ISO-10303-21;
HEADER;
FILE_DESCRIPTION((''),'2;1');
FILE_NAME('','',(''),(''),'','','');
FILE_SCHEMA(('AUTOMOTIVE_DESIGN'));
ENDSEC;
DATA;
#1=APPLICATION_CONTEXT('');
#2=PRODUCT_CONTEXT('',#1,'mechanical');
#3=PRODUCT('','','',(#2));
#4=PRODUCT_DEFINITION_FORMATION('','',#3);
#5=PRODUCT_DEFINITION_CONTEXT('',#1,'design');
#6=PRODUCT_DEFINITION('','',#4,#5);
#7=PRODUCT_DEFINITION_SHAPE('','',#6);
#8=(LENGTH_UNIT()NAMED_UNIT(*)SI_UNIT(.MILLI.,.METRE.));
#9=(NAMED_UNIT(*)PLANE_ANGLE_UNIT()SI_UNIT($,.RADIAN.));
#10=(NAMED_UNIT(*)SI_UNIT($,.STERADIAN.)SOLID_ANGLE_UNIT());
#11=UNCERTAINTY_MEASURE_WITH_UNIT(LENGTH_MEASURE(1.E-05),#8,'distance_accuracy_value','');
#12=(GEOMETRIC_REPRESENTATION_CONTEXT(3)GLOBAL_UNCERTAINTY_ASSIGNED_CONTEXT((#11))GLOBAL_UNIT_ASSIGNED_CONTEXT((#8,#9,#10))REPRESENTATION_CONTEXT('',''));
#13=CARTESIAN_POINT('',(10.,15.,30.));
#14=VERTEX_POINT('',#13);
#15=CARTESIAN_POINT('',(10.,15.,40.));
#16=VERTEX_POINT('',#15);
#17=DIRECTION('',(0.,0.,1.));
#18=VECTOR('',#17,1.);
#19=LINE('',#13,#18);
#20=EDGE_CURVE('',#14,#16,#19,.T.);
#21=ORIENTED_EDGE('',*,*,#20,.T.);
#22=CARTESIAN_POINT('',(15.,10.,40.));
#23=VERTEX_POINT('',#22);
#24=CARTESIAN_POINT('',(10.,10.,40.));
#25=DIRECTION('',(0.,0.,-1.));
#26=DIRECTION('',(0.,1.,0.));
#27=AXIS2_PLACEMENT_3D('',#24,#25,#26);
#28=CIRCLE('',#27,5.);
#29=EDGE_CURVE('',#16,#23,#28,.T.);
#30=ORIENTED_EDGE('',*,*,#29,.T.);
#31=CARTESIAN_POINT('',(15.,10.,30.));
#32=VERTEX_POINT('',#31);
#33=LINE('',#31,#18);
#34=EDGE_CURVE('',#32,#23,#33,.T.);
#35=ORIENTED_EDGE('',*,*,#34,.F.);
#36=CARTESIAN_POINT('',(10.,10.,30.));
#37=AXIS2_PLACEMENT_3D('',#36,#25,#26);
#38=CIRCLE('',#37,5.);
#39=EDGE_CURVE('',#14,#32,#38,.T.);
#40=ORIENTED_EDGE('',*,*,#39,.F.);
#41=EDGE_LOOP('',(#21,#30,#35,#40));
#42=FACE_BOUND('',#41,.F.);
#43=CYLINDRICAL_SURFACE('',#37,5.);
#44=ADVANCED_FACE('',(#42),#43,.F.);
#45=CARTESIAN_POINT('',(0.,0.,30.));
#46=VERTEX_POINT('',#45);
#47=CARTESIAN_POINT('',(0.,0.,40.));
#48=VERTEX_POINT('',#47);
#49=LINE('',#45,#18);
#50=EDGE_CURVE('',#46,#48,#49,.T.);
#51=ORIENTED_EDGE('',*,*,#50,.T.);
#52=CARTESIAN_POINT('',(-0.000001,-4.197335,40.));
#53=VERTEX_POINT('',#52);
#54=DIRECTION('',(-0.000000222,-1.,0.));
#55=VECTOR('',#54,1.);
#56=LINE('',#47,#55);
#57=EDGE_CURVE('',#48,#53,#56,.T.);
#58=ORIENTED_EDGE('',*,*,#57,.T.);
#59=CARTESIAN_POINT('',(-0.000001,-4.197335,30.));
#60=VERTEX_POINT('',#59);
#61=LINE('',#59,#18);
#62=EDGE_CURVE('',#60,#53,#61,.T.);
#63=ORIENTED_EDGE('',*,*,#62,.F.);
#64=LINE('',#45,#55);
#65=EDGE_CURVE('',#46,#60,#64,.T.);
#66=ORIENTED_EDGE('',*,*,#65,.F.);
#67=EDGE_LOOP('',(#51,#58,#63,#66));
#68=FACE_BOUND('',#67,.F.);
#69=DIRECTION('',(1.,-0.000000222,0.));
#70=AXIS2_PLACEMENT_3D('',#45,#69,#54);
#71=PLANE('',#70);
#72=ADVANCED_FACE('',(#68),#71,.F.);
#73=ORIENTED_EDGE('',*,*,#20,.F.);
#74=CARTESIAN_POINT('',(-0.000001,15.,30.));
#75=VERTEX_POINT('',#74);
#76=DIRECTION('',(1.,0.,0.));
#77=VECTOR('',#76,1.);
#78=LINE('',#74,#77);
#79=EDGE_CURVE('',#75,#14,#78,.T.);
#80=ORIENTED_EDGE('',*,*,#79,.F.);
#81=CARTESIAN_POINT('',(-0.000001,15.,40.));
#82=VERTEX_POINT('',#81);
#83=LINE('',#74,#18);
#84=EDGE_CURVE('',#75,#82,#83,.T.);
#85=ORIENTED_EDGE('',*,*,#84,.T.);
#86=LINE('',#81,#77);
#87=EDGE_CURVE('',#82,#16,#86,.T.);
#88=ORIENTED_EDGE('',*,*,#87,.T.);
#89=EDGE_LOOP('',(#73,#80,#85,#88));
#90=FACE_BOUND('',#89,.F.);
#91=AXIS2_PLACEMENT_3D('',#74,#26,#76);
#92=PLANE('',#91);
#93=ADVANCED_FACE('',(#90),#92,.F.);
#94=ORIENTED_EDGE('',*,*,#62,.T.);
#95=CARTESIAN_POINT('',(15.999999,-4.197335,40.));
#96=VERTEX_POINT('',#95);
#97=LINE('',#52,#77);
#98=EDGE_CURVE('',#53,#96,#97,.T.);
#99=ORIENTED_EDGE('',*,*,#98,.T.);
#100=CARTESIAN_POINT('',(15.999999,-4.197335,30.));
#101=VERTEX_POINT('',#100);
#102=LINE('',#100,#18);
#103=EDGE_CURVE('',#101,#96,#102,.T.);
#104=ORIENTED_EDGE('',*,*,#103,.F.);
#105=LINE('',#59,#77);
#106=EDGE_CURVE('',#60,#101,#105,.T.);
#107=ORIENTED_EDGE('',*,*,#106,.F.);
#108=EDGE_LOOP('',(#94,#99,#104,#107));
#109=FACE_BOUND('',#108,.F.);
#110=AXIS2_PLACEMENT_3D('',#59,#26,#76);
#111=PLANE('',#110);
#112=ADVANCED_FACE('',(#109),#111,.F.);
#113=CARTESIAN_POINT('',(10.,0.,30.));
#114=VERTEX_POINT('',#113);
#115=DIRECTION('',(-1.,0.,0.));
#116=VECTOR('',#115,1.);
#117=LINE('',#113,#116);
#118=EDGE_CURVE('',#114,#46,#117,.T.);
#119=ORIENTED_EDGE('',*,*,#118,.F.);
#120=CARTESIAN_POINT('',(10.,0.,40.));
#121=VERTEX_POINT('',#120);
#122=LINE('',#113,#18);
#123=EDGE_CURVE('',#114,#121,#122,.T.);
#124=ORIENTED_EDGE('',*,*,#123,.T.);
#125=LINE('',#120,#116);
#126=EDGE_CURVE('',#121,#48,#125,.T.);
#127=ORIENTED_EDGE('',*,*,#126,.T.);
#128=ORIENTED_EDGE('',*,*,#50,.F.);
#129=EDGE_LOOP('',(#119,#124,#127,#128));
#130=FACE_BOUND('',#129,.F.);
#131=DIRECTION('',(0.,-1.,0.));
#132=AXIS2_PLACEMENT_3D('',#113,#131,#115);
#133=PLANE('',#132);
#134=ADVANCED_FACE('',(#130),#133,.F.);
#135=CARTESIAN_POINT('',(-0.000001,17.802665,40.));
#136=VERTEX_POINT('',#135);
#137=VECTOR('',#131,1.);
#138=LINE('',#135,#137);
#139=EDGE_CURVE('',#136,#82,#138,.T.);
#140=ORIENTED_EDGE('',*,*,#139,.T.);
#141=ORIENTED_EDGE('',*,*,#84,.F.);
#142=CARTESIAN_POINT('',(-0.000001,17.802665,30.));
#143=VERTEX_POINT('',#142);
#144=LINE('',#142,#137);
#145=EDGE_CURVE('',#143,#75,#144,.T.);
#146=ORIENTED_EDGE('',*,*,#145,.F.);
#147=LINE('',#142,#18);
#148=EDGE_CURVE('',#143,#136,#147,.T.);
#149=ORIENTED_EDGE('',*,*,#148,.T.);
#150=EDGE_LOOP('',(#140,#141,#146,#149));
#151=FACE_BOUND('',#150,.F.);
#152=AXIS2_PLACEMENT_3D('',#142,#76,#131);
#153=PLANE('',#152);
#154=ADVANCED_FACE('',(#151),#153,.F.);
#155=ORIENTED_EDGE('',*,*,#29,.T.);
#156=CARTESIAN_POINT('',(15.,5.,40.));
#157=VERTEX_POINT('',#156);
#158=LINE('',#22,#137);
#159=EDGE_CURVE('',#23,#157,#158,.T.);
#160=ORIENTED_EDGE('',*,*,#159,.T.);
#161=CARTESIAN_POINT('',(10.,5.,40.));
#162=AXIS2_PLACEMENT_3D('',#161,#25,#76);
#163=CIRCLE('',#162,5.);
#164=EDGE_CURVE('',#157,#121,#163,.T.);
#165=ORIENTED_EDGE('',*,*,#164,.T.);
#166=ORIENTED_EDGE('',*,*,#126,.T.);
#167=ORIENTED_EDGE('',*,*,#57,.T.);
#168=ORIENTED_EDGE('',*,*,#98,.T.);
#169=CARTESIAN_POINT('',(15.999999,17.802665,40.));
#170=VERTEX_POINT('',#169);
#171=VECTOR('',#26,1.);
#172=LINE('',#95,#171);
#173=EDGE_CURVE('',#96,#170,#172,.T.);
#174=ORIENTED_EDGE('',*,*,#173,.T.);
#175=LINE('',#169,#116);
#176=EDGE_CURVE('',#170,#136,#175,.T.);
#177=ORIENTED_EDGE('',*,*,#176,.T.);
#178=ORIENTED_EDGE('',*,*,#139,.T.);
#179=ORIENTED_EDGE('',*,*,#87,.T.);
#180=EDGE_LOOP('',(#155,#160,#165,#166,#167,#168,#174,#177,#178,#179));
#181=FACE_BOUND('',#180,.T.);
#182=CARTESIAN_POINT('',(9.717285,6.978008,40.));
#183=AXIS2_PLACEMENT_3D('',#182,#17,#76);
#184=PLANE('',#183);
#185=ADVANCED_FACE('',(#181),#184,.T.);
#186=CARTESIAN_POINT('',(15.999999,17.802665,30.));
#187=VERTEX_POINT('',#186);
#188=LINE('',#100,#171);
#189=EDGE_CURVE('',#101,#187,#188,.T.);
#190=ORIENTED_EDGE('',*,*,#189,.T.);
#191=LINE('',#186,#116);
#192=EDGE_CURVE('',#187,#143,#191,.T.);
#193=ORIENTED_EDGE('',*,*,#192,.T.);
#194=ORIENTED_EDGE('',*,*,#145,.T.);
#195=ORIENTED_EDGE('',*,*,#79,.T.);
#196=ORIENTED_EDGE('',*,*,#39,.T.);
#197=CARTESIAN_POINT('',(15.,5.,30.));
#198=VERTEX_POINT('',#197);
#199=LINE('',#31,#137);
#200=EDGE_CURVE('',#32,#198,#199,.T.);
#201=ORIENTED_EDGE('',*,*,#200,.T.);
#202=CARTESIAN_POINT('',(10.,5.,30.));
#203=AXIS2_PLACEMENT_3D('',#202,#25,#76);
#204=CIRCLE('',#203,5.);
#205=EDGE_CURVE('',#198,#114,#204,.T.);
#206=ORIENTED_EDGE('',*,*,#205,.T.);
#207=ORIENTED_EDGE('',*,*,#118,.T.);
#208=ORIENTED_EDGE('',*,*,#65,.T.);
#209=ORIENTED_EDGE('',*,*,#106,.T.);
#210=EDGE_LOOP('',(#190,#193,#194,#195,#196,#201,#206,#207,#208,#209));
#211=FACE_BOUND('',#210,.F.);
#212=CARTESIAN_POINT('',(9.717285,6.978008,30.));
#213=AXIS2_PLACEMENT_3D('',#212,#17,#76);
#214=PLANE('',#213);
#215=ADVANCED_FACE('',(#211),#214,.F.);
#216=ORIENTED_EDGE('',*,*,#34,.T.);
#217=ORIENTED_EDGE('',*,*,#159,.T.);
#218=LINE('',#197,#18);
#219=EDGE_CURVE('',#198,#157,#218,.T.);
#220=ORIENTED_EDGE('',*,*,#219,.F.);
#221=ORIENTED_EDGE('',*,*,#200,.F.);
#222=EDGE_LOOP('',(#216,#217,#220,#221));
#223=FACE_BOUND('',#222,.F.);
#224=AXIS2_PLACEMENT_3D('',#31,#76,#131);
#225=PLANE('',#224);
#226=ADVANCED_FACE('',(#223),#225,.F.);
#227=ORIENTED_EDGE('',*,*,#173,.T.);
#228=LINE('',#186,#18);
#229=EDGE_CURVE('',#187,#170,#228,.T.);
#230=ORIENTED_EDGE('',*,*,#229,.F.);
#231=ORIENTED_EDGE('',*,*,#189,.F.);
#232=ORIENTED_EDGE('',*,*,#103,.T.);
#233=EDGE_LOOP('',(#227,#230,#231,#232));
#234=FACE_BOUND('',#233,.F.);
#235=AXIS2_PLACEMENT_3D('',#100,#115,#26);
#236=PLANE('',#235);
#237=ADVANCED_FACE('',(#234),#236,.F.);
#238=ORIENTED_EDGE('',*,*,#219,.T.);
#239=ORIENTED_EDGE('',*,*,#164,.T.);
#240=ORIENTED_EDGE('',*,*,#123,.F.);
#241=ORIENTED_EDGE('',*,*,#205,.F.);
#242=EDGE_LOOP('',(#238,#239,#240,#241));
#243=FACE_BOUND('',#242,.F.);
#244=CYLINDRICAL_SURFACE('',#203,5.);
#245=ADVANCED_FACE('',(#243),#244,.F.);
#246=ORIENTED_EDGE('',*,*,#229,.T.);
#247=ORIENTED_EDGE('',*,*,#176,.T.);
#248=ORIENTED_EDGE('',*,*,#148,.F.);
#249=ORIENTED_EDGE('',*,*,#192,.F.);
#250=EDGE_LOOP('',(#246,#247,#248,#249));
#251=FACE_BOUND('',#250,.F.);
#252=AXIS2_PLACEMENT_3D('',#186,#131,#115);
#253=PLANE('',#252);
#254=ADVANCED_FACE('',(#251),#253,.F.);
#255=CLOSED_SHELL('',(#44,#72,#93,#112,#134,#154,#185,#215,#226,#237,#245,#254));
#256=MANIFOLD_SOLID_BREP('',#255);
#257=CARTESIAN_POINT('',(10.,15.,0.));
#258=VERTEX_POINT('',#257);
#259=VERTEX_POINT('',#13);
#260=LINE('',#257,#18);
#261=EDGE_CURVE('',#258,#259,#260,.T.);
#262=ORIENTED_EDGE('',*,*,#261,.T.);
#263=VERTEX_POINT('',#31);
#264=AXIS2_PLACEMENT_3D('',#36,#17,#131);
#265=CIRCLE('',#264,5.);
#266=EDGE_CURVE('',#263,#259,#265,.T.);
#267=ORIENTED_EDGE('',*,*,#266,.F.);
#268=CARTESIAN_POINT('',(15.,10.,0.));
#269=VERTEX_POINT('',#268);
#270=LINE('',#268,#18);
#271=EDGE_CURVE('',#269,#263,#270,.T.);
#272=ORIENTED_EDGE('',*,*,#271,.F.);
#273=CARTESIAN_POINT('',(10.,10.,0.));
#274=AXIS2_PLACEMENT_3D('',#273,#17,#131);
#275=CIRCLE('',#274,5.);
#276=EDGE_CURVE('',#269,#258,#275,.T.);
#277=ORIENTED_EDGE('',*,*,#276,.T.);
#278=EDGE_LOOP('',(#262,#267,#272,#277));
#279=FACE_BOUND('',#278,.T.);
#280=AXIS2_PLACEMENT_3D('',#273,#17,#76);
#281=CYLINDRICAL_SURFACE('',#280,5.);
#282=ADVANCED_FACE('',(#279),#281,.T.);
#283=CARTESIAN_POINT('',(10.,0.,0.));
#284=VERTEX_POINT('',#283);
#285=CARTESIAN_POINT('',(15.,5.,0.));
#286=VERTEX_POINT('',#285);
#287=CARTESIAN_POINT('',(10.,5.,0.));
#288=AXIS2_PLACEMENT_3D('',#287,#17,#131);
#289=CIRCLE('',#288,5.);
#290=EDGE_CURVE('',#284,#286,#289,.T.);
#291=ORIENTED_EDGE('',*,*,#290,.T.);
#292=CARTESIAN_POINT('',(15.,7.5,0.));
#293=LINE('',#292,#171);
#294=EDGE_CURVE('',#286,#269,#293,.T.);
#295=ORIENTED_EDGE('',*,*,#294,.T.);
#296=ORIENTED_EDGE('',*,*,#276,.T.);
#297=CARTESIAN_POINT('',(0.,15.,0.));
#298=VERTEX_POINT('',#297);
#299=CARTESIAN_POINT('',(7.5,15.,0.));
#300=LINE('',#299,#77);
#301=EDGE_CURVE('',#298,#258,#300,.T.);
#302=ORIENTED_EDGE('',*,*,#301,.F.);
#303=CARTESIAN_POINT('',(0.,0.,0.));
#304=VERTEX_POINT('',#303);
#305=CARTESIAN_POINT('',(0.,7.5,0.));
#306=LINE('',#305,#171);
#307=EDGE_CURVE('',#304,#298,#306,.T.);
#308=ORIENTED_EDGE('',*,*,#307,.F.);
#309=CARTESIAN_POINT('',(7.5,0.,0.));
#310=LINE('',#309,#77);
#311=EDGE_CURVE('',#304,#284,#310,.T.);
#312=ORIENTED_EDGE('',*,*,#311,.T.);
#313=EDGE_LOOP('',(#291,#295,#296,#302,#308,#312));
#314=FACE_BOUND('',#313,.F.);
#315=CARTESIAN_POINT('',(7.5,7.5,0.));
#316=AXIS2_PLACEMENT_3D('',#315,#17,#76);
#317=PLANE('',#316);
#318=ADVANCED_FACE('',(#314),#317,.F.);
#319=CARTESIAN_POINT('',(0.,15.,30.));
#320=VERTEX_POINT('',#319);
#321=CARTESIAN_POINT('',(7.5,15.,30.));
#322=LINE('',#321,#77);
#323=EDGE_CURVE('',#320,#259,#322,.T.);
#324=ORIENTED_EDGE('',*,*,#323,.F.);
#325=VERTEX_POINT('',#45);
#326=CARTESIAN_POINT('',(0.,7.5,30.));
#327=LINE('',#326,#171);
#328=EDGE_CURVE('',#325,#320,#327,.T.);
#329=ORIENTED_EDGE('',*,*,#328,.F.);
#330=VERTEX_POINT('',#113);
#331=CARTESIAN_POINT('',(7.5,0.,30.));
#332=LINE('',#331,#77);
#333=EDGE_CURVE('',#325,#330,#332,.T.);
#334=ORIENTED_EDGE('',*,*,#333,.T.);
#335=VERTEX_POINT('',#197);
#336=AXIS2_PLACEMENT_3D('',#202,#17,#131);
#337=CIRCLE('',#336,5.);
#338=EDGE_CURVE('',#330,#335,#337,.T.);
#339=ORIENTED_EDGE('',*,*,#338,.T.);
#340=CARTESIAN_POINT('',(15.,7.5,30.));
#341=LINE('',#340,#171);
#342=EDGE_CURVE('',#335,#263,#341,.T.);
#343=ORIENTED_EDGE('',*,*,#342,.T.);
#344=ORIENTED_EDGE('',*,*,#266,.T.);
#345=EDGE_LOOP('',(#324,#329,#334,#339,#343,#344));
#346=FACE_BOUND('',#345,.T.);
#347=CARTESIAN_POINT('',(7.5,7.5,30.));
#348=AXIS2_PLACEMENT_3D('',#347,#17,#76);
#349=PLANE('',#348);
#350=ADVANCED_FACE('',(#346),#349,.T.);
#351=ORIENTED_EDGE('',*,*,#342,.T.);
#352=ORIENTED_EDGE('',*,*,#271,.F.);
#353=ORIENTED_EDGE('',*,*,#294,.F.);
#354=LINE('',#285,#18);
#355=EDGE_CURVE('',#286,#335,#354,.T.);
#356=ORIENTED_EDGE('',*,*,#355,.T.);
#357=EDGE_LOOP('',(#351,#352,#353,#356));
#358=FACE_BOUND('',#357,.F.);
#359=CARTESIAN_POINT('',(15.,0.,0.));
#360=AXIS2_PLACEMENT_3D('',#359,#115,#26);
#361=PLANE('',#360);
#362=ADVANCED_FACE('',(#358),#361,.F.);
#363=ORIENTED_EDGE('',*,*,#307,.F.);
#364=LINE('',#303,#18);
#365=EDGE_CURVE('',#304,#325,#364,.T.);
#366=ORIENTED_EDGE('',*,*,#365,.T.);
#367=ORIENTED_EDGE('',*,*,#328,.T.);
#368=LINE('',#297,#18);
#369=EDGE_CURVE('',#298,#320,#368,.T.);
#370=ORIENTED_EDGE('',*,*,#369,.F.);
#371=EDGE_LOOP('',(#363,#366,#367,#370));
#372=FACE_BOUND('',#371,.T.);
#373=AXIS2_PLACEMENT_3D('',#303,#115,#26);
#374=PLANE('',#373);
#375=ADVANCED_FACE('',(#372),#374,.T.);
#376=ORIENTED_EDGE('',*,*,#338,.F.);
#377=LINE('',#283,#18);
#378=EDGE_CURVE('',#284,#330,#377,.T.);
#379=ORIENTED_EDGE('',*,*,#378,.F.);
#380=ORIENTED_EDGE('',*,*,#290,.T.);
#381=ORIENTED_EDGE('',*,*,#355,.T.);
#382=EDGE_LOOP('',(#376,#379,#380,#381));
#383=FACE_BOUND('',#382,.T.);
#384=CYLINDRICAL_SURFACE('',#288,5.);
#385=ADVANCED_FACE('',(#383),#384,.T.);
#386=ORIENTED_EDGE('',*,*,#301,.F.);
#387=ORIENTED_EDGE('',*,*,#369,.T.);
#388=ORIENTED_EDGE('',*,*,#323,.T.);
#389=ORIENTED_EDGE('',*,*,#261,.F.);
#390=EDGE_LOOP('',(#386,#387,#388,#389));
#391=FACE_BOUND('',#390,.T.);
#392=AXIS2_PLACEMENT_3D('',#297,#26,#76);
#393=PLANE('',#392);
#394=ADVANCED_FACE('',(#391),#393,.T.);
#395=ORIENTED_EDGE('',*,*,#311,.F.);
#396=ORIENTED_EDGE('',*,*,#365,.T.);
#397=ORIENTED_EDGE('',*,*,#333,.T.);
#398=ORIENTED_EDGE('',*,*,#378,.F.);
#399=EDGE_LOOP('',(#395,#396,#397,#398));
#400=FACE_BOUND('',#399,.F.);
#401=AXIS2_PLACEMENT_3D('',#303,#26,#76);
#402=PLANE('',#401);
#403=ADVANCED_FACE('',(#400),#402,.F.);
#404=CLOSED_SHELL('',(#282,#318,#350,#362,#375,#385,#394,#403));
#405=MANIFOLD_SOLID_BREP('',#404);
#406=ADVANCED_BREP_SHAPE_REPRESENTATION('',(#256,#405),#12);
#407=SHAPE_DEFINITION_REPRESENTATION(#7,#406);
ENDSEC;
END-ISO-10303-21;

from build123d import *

# Parameters (mm, degrees)
F0_W     = 15
F0_H     = 15
F1_DEPTH = 30
F2_R     = 5
F4_DEPTH = 10


# Not quite as in the source:
# - ends of sketch curves that miss each other by under 0.0002 mm in the source are joined


with BuildPart() as f1:
    # F0 (on Top) → F1 (new body)
    with BuildSketch(Plane.XY):
        with Locations((7.5, 7.5)):
            Rectangle(F0_W, F0_H)
    extrude(amount=F1_DEPTH)

    # F2
    f2_edges = [f1.edges().sort_by_distance(p)[0] for p in [
        (15, 0, 15),
        (15, 15, 15),
    ]]
    fillet(f2_edges, radius=F2_R)


with BuildPart() as f4:
    # F3 (on face) → F4 (new body)
    with BuildSketch(Plane.XY.offset(30)):
        with BuildLine():
            Line((15.9999990687, -4.1973348707), (15.9999990687, 17.8026651293))
            Line((15.9999990687, 17.8026651293), (-9.313e-07, 17.8026651293))
            Line((-9.313e-07, 17.8026651293), (-9.313e-07, 15))
            Line((-9.313e-07, 15), (10, 15))
            ThreePointArc((10, 15), (13.5355339059, 13.5355339059), (15, 10))
            Line((15, 10), (15, 5))
            ThreePointArc((15, 5), (13.5355339059, 1.4644660941), (10, 0))
            Line((10, 0), (0, 0))
            Line((0, 0), (-9.313e-07, -4.1973348707))
            Line((-9.313e-07, -4.1973348707), (15.9999990687, -4.1973348707))
        make_face()
    extrude(amount=F4_DEPTH)


solid = Compound([f1.part, f4.part])
